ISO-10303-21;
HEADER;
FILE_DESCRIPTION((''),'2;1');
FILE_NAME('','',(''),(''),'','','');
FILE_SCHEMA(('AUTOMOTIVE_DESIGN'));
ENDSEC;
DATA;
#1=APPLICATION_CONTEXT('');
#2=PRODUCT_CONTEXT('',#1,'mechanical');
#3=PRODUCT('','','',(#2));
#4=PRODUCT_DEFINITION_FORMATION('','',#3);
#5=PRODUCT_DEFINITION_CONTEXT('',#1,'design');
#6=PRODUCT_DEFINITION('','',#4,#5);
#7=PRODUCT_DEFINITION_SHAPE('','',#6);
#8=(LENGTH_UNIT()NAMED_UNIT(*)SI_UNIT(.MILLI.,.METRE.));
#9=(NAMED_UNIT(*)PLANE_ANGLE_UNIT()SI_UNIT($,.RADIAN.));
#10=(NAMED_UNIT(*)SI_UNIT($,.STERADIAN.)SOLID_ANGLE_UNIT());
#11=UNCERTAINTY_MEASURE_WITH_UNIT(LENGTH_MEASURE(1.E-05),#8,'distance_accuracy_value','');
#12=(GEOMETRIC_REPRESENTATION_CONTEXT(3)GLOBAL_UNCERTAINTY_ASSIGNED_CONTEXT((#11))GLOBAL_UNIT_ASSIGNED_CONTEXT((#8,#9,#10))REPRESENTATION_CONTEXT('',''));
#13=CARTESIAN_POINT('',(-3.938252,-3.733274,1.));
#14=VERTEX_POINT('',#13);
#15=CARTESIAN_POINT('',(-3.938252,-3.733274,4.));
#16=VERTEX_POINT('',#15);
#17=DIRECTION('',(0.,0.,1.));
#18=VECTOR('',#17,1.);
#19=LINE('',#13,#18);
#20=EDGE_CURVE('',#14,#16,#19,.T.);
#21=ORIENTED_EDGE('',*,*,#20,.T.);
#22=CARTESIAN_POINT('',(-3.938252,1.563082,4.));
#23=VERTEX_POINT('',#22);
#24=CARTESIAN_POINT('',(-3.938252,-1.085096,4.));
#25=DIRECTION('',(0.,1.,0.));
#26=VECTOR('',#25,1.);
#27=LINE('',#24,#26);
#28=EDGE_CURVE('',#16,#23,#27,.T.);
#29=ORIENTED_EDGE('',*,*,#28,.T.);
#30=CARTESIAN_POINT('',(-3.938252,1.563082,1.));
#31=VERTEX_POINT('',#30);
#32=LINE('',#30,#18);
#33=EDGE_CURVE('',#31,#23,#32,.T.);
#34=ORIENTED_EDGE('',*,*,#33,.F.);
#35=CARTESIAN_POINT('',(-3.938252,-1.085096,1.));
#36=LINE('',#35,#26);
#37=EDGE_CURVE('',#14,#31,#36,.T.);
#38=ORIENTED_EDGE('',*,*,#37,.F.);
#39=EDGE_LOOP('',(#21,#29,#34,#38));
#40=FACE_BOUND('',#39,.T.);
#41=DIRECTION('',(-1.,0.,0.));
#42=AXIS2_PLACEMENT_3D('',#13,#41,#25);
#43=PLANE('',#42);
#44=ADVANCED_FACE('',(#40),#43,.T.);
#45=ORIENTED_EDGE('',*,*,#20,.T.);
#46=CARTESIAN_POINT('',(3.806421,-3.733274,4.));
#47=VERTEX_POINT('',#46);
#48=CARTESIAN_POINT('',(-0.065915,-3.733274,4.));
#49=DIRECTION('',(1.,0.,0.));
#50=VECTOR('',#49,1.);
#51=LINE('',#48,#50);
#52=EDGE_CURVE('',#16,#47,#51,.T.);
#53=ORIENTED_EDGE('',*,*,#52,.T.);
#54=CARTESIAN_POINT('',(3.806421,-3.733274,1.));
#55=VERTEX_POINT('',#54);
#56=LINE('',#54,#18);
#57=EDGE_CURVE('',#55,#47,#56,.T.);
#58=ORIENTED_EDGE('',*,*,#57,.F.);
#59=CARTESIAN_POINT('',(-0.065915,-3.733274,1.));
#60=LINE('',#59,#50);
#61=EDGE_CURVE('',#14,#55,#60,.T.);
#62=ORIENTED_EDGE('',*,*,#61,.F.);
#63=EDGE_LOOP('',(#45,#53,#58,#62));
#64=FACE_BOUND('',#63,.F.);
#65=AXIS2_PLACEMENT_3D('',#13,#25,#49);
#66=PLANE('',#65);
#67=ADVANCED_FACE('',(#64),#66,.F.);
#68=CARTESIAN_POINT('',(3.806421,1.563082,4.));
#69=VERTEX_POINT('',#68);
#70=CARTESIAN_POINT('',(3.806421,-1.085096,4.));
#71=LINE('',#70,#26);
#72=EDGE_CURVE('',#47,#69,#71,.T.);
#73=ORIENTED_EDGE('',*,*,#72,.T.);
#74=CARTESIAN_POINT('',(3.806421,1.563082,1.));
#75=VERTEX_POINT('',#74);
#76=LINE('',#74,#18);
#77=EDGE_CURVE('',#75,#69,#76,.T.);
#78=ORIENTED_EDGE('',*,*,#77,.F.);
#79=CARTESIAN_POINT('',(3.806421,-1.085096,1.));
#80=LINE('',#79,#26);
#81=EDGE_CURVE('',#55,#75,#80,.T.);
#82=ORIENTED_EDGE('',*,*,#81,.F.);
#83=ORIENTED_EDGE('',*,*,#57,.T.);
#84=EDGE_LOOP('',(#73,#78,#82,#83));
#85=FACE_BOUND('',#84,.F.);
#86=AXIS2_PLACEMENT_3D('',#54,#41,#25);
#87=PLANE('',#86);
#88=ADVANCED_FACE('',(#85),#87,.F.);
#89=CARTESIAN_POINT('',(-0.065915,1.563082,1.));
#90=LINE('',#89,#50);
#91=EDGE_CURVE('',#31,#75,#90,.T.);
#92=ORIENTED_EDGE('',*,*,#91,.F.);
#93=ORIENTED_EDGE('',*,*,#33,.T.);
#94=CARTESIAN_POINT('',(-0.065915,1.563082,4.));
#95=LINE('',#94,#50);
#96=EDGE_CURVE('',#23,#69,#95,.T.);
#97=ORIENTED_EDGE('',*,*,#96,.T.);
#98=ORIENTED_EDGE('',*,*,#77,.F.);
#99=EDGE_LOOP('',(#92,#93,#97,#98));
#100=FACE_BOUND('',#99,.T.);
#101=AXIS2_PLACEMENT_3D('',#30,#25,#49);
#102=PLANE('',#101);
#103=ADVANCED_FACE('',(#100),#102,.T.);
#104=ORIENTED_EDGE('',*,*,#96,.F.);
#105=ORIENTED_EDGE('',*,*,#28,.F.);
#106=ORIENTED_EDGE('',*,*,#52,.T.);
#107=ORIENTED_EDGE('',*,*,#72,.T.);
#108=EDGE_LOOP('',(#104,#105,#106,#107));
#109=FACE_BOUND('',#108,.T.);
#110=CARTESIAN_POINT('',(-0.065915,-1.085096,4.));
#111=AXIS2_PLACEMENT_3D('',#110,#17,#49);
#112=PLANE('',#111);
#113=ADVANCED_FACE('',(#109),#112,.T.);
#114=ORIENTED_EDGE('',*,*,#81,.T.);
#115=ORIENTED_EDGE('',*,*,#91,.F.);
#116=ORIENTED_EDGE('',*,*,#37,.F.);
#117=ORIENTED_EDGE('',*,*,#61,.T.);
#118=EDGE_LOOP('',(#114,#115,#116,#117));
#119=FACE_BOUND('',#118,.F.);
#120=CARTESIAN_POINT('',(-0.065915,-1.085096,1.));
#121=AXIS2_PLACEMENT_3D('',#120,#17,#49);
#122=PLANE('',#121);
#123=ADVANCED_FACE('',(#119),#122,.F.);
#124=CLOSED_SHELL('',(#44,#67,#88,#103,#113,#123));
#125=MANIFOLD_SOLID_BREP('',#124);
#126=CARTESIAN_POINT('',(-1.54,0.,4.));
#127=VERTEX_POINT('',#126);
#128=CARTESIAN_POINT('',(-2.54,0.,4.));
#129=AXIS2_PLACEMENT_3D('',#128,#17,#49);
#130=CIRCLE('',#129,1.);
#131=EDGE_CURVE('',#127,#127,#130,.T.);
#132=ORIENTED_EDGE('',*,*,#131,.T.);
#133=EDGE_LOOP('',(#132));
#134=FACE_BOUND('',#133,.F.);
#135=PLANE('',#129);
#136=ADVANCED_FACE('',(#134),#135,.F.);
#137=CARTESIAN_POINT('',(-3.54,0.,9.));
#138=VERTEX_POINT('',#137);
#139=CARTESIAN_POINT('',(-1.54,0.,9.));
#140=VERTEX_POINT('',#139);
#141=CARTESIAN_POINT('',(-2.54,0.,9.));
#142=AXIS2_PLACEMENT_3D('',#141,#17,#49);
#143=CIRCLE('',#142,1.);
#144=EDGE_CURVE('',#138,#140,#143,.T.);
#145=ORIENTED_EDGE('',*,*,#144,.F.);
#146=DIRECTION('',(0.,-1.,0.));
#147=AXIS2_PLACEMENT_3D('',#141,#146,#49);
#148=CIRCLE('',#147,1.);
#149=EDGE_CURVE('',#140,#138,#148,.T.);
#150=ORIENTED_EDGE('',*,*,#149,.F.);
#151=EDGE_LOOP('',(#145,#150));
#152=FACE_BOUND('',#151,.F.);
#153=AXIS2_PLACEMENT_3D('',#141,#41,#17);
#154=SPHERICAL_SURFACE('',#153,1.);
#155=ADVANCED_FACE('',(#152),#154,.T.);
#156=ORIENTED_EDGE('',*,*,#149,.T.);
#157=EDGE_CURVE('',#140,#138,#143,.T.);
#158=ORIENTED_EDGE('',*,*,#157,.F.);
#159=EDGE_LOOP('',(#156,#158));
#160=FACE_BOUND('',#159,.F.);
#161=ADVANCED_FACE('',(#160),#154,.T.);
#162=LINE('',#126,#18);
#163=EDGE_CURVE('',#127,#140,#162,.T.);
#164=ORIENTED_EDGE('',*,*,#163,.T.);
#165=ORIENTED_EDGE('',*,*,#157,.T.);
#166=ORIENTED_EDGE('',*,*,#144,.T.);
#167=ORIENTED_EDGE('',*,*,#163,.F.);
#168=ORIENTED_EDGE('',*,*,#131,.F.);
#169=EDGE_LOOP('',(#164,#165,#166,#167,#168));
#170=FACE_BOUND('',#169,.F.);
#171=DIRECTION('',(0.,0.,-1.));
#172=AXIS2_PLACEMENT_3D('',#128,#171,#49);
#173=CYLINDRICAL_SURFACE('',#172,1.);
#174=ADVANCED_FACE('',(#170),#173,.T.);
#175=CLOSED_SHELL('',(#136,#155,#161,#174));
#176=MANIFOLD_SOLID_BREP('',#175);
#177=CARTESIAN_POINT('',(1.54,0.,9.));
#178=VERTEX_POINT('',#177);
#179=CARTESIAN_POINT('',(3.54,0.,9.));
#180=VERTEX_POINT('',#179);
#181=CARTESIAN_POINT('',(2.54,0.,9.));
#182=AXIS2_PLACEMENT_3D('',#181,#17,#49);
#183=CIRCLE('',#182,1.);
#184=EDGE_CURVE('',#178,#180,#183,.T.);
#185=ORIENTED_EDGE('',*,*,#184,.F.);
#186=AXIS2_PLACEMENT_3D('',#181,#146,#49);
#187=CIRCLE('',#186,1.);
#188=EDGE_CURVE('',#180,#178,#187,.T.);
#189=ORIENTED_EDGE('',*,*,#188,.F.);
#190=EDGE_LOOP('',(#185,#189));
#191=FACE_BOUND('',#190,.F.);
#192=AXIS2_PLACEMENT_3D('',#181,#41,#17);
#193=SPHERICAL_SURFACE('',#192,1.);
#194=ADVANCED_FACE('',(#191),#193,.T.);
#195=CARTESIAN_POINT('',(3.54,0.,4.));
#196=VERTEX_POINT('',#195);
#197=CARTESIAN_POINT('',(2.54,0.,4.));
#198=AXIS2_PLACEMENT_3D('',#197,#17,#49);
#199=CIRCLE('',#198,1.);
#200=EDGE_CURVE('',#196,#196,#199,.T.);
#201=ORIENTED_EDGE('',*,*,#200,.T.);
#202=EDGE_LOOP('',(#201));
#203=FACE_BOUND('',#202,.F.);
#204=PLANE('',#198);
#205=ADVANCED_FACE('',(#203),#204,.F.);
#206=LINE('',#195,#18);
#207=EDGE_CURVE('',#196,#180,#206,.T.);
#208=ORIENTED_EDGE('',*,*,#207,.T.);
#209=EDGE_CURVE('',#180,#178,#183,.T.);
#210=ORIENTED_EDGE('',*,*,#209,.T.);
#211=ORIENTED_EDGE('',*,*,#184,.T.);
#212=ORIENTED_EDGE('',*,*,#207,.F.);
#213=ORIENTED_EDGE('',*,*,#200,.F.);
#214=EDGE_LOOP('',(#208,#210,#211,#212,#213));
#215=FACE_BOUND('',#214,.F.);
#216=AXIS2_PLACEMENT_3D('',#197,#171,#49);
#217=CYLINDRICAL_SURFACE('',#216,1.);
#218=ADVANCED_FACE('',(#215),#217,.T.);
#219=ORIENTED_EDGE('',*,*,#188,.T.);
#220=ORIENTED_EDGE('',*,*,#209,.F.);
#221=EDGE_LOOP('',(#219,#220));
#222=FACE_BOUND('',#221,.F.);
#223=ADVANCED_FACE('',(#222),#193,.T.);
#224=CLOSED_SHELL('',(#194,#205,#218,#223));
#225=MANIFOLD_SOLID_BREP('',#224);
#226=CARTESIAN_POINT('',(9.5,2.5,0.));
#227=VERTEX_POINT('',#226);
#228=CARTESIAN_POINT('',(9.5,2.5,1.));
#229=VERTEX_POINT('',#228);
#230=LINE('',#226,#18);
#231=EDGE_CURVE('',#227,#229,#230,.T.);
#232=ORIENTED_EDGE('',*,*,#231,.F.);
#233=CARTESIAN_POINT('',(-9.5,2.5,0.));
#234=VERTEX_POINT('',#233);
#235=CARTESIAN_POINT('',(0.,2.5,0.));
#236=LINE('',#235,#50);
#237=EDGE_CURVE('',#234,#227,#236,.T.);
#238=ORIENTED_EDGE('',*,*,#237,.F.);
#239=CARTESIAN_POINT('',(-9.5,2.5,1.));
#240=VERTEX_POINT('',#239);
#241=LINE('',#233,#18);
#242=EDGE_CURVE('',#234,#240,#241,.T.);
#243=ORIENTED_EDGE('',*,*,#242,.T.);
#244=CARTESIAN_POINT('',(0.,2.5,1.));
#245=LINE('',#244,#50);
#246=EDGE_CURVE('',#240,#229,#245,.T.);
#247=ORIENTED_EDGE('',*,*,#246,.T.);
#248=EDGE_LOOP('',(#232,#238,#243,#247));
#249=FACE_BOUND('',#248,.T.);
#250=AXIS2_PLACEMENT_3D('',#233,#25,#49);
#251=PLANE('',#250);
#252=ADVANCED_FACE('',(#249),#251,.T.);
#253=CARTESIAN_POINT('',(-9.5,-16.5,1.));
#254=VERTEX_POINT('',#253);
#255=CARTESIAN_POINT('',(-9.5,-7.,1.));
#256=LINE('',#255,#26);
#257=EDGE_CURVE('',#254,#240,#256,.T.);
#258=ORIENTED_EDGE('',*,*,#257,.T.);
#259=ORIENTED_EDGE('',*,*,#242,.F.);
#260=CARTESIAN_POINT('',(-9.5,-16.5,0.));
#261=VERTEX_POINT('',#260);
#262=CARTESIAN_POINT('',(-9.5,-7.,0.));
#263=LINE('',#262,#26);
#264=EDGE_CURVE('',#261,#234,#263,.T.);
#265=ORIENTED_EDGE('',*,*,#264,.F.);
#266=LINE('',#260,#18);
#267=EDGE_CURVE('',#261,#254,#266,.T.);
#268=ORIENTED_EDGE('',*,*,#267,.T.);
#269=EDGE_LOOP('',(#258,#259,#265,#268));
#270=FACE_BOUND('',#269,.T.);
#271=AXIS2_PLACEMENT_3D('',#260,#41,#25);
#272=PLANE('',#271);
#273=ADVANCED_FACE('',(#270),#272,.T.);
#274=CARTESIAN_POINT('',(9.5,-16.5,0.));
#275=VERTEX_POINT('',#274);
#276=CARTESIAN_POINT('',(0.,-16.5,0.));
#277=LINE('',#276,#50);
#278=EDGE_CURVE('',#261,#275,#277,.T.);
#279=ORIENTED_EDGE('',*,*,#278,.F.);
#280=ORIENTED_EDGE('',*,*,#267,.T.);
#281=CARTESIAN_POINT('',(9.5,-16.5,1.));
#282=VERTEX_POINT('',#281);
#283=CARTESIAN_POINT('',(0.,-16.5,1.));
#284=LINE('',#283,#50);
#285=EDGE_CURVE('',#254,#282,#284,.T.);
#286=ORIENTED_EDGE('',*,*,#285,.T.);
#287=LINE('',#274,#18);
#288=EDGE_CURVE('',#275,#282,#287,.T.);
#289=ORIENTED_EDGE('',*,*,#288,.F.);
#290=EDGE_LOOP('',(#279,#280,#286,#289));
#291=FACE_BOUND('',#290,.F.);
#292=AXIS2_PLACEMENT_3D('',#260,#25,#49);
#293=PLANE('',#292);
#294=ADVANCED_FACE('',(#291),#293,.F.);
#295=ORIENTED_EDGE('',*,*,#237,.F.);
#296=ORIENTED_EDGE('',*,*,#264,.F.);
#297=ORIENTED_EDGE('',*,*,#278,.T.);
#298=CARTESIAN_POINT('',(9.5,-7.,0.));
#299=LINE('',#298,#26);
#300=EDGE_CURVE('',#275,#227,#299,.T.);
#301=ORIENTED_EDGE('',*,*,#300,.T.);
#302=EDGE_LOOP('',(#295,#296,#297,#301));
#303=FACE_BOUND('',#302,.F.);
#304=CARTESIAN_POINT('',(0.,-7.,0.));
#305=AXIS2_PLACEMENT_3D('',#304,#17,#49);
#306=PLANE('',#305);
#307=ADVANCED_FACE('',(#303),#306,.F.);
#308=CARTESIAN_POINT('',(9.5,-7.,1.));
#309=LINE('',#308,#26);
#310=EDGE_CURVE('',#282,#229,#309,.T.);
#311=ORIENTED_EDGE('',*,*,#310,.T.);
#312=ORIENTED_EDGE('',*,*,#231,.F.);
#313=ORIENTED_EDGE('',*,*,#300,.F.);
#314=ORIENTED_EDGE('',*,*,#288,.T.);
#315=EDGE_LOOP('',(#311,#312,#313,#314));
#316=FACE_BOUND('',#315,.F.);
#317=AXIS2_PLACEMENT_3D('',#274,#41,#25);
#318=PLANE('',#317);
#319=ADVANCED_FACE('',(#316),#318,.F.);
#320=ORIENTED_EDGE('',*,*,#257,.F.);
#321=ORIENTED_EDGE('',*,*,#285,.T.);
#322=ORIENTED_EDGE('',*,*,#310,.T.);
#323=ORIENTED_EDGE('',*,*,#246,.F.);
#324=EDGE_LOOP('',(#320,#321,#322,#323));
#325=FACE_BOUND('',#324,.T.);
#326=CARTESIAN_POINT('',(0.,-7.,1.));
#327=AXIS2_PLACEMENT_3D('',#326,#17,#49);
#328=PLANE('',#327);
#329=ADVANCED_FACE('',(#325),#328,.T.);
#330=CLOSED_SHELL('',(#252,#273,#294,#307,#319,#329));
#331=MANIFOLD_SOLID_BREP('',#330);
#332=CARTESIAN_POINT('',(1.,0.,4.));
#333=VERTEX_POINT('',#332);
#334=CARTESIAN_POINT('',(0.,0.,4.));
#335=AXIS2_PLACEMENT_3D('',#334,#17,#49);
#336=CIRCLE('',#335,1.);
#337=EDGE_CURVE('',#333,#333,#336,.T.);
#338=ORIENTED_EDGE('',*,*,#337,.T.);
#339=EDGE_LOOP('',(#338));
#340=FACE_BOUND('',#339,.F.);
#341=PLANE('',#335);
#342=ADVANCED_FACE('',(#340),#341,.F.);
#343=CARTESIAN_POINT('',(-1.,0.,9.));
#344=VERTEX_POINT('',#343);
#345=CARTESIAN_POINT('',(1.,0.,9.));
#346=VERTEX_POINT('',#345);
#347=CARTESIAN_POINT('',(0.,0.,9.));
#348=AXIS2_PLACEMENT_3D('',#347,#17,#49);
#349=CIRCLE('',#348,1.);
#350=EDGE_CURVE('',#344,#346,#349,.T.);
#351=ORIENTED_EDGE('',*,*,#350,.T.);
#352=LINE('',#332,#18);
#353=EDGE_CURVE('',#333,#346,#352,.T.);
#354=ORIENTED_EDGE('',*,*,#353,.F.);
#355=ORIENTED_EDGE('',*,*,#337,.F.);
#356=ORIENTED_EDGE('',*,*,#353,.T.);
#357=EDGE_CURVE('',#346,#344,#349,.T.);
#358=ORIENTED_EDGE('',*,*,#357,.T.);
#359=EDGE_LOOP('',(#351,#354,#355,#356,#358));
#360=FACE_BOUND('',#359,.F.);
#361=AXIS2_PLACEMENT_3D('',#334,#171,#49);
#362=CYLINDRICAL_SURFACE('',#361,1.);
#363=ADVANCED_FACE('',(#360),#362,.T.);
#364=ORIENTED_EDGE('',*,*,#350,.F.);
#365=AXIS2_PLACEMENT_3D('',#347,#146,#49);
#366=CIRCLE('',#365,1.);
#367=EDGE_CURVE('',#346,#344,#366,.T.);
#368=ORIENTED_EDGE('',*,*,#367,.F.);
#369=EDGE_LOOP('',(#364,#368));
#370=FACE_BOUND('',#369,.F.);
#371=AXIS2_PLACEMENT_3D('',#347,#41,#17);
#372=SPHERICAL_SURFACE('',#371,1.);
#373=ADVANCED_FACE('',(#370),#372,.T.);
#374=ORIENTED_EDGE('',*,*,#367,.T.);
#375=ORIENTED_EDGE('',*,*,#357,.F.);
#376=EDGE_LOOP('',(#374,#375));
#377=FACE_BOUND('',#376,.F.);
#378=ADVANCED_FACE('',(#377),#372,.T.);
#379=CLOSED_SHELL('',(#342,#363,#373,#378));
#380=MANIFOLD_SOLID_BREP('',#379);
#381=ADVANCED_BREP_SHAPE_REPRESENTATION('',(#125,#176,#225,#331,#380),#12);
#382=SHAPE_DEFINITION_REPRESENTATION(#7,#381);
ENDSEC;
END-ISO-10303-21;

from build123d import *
from build123d import SkipClean  # not in build123d's __all__

# Parameters (mm, degrees)
F0_W     = 19
F0_H     = 19
F1_DEPTH = 1
F2_W     = 7.7446724754
F2_H     = 5.2963567432
F3_DEPTH = 3
F4_R     = 1
F5_DEPTH = 5


with BuildPart() as f1:
    # F0 (on Top) → F1 (new body)
    with BuildSketch(Plane.XY):
        with Locations((0, -7)):
            Rectangle(F0_W, F0_H)
    extrude(amount=F1_DEPTH)


with BuildPart() as f3:
    # F2 (on face) → F3 (new body)
    with BuildSketch(Plane.XY.offset(1)):
        with Locations((-0.065915403, -1.0850959225)):
            Rectangle(F2_W, F2_H)
    extrude(amount=F3_DEPTH)


with BuildPart() as f5:
    # F4 (on face) → F5 (new body)
    with BuildSketch(Plane.XY.offset(4)):
        with Locations((-2.54, 0)):
            Circle(F4_R)
    extrude(amount=F5_DEPTH)

    # F6 (on Front) → F7, piece 3 (revolve)
    with BuildSketch(Plane.XZ):
        with BuildLine():
            Line((-3.54, 9), (-1.54, 9))
            ThreePointArc((-1.54, 9), (-2.54, 10), (-3.54, 9))
        make_face()
    with SkipClean():  # cleaning this boolean's faces spoils the solid; the shape is the same uncleaned
        revolve(axis=Axis((0, 0, 9), (1, 0, 0)))


with BuildPart() as f5b:
    # F4 (on face) → F5, piece 2 (new body)
    with BuildSketch(Plane.XY.offset(4)):
        Circle(F4_R)
    extrude(amount=F5_DEPTH)

    # F6 (on Front) → F7 (revolve)
    with BuildSketch(Plane.XZ):
        with BuildLine():
            Line((-1, 9), (1, 9))
            ThreePointArc((1, 9), (0, 10), (-1, 9))
        make_face()
    with SkipClean():  # cleaning this boolean's faces spoils the solid; the shape is the same uncleaned
        revolve(axis=Axis((0, 0, 9), (1, 0, 0)))


with BuildPart() as f5c:
    # F4 (on face) → F5, piece 3 (new body)
    with BuildSketch(Plane.XY.offset(4)):
        with Locations((2.54, 0)):
            Circle(F4_R)
    extrude(amount=F5_DEPTH)

    # F6 (on Front) → F7, piece 2 (revolve)
    with BuildSketch(Plane.XZ):
        with BuildLine():
            Line((1.54, 9), (3.54, 9))
            ThreePointArc((3.54, 9), (2.54, 10), (1.54, 9))
        make_face()
    with SkipClean():  # cleaning this boolean's faces spoils the solid; the shape is the same uncleaned
        revolve(axis=Axis((0, 0, 9), (1, 0, 0)))


solid = Compound([f1.part, f3.part, f5.part, f5b.part, f5c.part])
